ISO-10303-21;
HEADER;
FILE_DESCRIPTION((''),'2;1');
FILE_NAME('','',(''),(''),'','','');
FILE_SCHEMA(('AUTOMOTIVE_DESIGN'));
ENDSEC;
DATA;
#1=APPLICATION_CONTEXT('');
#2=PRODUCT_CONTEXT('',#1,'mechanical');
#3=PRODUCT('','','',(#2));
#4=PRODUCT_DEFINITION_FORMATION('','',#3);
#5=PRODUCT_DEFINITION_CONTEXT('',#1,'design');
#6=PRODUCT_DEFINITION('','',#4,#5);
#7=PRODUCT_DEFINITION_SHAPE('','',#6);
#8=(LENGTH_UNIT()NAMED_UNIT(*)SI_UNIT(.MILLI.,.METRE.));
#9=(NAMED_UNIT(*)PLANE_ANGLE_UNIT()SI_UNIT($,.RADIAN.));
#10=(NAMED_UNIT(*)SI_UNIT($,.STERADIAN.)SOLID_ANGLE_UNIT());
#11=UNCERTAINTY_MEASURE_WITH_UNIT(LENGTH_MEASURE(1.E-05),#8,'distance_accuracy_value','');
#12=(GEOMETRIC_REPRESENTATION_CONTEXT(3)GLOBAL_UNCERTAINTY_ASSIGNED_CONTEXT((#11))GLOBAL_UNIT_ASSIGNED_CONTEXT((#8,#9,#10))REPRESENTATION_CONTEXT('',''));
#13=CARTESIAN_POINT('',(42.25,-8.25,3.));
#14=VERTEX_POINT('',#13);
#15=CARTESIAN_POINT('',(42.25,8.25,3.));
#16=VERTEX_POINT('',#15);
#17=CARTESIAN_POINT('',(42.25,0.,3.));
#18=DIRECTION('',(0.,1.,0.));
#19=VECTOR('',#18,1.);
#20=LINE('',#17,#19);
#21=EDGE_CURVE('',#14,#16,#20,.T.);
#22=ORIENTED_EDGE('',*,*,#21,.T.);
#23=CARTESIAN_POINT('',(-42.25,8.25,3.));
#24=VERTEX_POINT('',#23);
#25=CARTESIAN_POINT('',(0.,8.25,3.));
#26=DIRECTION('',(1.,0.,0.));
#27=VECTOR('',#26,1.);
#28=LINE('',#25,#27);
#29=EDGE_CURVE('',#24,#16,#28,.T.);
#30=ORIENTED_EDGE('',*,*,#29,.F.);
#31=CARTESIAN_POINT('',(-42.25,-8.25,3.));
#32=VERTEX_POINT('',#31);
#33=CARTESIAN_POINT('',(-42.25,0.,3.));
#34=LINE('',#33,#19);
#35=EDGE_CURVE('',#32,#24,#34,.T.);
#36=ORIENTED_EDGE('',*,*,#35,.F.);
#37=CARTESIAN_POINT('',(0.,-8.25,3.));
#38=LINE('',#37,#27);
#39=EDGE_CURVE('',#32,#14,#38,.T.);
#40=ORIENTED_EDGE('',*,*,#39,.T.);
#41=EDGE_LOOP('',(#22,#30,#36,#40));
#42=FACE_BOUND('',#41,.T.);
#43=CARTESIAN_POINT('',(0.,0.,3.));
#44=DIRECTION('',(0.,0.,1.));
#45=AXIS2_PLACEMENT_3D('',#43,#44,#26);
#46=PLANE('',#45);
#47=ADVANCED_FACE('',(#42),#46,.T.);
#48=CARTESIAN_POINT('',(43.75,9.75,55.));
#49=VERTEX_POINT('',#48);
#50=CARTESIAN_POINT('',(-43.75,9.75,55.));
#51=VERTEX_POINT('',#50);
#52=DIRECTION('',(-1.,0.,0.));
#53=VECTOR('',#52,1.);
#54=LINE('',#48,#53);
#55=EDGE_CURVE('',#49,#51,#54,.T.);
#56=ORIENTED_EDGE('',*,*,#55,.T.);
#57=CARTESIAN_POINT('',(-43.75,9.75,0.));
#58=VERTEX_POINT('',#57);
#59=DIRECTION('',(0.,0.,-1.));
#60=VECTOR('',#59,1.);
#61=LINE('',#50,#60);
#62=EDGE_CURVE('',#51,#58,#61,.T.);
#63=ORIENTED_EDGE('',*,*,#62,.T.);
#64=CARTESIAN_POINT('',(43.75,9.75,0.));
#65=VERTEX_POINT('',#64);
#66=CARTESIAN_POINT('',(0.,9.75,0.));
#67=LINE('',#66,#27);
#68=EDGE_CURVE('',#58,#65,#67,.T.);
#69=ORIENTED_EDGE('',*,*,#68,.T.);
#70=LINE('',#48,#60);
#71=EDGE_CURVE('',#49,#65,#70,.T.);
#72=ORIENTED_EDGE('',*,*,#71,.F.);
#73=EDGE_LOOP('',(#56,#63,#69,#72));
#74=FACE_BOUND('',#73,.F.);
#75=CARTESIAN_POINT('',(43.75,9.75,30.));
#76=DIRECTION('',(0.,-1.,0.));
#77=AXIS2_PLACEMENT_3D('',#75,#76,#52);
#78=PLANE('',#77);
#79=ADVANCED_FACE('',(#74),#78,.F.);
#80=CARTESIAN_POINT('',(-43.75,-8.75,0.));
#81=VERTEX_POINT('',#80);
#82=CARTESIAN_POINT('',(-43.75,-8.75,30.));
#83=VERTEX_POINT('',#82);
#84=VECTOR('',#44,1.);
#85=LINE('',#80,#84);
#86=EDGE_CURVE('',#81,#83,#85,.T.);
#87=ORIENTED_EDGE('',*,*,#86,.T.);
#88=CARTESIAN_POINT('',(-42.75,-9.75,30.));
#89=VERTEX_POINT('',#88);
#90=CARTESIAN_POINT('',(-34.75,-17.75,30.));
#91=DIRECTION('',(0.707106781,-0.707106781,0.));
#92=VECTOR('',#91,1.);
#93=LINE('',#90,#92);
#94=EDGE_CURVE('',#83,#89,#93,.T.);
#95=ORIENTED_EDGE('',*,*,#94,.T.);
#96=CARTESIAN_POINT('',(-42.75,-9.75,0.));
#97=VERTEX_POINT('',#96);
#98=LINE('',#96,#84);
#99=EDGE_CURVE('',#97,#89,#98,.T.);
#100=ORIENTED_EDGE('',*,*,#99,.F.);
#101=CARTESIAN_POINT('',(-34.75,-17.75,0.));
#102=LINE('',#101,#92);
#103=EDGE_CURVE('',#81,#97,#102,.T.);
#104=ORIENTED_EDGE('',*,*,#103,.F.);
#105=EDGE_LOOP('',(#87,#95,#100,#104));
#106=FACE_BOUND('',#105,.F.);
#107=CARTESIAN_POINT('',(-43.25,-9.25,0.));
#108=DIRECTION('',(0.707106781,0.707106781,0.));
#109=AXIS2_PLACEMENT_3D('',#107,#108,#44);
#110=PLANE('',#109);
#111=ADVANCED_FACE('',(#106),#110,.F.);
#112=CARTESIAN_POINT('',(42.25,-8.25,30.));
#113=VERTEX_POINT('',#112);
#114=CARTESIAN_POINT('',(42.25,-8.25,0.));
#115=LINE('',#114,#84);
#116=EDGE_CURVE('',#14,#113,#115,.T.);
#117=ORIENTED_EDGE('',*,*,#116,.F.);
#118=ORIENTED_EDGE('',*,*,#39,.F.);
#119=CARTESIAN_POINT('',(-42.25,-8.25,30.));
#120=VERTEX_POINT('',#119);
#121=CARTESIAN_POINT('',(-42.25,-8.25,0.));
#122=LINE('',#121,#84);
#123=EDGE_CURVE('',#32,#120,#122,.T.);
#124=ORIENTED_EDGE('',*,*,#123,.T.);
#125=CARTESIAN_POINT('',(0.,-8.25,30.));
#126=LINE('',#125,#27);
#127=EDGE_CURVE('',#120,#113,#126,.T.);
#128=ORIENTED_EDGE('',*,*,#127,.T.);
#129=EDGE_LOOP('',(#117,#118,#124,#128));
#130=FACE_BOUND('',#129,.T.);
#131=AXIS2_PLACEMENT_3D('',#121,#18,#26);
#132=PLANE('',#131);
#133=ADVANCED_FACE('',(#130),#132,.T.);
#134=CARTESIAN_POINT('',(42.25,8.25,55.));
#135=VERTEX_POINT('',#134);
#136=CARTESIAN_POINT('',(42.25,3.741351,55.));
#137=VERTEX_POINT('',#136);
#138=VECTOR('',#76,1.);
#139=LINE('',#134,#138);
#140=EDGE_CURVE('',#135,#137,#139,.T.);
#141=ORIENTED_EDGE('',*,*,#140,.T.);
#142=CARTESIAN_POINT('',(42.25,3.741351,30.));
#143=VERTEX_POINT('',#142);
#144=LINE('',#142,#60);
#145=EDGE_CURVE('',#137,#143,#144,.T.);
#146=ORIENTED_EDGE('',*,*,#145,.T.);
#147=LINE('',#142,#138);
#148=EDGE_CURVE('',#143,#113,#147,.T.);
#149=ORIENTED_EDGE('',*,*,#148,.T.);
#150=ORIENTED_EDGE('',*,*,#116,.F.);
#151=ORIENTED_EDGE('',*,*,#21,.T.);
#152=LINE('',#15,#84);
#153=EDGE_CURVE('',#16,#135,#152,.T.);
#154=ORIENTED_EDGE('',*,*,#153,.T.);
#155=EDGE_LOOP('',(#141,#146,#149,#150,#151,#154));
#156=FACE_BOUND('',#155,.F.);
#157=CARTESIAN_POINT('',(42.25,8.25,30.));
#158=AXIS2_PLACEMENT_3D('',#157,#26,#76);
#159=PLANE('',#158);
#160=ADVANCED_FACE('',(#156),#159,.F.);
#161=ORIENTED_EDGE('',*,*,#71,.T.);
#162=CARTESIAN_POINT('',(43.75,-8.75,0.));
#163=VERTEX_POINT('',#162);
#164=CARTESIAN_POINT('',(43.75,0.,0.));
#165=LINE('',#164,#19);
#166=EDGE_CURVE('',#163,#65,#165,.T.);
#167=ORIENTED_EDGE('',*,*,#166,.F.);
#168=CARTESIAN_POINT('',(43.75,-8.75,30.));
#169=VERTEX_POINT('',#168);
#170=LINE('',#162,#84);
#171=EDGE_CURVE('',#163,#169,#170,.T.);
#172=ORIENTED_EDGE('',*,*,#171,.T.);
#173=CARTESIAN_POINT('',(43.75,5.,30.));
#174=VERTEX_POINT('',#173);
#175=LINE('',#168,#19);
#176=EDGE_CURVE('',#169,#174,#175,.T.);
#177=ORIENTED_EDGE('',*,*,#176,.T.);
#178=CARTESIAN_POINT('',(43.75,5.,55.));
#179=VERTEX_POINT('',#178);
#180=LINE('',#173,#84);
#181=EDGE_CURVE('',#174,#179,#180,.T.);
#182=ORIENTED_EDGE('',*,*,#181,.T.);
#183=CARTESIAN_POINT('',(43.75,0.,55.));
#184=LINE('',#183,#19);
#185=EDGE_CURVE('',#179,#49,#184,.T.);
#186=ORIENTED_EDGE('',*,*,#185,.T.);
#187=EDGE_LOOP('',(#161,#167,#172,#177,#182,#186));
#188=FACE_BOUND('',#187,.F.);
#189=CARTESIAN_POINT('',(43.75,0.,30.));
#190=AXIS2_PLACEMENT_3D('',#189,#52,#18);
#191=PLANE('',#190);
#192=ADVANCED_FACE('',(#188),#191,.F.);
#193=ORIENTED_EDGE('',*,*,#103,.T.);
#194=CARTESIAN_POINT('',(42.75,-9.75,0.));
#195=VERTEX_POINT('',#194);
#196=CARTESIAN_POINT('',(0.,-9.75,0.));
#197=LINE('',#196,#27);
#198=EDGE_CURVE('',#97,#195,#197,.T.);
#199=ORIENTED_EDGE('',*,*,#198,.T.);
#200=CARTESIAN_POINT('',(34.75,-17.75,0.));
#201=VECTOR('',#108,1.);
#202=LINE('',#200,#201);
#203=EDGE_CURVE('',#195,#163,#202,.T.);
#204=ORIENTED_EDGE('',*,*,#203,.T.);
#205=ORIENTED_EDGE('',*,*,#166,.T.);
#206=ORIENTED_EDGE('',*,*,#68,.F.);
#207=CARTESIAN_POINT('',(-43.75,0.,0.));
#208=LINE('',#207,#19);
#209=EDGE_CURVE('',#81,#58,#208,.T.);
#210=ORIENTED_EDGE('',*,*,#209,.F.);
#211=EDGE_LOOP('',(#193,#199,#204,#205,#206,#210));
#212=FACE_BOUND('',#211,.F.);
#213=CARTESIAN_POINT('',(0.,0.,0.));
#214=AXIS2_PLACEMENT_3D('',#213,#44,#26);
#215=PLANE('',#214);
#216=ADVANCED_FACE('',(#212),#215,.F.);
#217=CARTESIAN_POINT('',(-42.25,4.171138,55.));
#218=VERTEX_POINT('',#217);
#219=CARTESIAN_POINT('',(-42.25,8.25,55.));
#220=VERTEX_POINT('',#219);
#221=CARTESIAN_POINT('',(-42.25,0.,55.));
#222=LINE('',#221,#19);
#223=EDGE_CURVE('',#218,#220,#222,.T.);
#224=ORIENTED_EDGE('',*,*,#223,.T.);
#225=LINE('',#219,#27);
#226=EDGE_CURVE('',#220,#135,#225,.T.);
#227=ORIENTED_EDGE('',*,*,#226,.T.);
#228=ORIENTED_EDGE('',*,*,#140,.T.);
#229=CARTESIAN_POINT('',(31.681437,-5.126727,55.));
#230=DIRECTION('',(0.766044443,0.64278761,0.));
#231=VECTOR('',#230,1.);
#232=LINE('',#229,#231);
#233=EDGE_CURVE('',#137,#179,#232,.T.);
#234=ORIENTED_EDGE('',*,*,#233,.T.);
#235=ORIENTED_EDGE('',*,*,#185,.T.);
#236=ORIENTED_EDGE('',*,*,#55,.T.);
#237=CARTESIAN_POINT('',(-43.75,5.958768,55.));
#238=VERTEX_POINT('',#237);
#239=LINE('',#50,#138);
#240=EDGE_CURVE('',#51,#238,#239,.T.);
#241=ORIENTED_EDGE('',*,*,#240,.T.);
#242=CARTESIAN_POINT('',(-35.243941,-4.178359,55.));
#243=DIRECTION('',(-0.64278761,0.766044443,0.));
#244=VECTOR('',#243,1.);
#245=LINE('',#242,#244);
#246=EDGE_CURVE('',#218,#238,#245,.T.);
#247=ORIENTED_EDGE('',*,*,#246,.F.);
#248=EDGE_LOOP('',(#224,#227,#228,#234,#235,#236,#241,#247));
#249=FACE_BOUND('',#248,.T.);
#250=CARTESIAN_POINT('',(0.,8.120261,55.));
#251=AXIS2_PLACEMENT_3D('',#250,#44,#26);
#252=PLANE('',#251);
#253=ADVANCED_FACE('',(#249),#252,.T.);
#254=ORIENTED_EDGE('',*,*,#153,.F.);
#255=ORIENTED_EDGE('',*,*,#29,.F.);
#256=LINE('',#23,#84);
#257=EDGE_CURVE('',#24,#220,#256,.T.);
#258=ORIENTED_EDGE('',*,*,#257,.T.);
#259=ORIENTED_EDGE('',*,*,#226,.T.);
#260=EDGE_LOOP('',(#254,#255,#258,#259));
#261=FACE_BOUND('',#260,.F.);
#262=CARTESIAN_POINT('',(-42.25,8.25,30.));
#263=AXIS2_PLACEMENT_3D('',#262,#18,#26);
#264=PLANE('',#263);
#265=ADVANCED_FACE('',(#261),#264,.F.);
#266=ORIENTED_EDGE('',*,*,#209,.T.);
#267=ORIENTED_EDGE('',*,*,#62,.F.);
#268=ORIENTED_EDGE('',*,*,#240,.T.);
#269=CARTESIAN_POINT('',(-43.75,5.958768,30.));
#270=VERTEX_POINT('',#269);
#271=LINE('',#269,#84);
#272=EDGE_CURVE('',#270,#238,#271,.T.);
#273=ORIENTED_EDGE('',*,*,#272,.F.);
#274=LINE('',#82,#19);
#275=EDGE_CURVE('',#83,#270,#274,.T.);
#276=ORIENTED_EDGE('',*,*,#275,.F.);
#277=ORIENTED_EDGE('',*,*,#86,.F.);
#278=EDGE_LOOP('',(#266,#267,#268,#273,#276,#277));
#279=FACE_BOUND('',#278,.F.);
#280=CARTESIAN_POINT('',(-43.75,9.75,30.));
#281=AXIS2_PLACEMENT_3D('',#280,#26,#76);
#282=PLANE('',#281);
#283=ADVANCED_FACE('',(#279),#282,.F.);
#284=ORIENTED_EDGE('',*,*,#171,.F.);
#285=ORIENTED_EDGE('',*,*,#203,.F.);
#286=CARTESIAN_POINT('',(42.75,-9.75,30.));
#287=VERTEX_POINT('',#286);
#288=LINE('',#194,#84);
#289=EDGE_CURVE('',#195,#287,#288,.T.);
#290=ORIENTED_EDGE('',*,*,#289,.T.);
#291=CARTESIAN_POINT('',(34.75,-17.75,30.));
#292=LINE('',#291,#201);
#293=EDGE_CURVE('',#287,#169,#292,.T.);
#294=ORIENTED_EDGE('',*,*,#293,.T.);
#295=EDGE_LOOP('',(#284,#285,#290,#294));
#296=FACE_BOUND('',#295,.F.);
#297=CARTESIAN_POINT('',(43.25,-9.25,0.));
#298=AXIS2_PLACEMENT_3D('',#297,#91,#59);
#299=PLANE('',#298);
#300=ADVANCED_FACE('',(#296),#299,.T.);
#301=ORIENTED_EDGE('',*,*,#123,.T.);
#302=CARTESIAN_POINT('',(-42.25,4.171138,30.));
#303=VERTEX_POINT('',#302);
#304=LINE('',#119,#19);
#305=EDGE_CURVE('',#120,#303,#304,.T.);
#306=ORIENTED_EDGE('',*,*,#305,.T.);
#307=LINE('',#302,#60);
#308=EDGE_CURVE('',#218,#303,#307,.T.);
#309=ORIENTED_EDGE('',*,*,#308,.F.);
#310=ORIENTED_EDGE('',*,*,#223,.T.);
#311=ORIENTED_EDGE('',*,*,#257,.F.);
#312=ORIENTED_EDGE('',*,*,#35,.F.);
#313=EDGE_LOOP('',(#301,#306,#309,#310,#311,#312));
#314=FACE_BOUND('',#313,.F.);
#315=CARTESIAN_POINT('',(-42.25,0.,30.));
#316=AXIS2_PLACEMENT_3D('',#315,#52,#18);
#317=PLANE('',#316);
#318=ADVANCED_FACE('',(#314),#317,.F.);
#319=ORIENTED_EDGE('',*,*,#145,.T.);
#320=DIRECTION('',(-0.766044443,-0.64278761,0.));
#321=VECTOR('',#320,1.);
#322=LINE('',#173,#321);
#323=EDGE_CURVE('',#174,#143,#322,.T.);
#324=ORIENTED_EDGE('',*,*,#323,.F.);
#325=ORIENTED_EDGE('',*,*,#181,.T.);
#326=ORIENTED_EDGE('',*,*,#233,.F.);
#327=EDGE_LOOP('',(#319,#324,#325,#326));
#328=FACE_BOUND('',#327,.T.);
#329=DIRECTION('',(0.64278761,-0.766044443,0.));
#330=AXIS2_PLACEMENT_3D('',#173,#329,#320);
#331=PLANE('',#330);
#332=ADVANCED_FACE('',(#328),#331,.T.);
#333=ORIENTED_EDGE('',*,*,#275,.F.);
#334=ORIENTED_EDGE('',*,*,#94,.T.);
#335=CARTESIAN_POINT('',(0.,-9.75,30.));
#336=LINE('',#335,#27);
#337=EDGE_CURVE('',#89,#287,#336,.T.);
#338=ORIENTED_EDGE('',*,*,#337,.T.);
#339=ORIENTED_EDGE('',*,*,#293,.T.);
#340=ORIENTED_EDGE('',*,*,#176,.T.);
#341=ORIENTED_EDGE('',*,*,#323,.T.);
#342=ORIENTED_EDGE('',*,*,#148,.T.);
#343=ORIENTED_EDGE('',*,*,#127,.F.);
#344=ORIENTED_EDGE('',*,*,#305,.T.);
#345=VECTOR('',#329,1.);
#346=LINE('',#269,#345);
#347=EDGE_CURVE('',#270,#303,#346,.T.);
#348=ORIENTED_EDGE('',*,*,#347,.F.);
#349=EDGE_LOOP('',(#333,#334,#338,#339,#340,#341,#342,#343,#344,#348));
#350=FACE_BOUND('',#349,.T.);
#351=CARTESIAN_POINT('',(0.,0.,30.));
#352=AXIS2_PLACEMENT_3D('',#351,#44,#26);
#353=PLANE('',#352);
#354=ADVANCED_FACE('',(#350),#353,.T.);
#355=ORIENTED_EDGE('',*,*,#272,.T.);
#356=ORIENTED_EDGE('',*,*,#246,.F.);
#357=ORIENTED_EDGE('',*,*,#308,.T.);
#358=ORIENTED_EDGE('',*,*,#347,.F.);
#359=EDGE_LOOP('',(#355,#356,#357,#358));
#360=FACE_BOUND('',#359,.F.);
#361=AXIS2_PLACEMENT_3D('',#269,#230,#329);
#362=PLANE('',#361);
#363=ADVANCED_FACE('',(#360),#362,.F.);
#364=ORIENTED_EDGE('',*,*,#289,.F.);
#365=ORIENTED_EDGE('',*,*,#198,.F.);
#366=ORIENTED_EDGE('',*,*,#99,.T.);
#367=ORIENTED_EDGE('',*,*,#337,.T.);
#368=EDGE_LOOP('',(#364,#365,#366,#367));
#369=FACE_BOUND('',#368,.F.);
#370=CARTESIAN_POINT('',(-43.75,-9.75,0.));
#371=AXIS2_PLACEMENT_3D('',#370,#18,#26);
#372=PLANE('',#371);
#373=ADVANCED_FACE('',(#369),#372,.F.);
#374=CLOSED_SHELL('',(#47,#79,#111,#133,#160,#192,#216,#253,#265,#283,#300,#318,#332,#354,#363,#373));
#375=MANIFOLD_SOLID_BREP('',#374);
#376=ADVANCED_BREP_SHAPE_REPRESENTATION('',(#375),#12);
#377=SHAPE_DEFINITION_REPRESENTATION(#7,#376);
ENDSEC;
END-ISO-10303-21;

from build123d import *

# Parameters (mm, degrees)
F0_W        = 87.5
F0_H        = 19.5
F0_W_2      = 84.5
F0_H_2      = 16.5
F1_DEPTH    = 30
F2_DEPTH    = 3
F3_SIZE     = 1
F5_DEPTH    = 25
F6_DEPTH    = 25
F7_T1_DEPTH = 40.3581649162


# Not quite as in the source:
# - a fillet or chamfer that OpenCascade refuses, or shapes differently, is made with other operations: its cross-section is extruded or revolved along the edge and cut away or added


with BuildPart() as f1:
    # F0 (on Top) → F1 (new body)
    with BuildSketch(Plane.XY):
        Rectangle(F0_W, F0_H)
        Rectangle(F0_W_2, F0_H_2, mode=Mode.SUBTRACT)
    extrude(amount=F1_DEPTH)

    # F0 (on Top) → F2 (join)
    with BuildSketch(Plane.XY):
        Rectangle(F0_W_2, F0_H_2)
    extrude(amount=F2_DEPTH)

    # F3
    f3_edges = [f1.edges().sort_by_distance(p)[0] for p in [
        (-43.75, -9.75, 15),
        (43.75, -9.75, 15),
    ]]
    chamfer(f3_edges, length=F3_SIZE)

    # F4 (on face) → F5 (join)
    with BuildSketch(Plane.XY.offset(30)):
        Polygon((-43.75, 9.75), (-43.75, 0), (-42.25, 0), (-42.25, 8.25), (42.25, 8.25), (42.25, 0), (43.75, 0), (43.75, 9.75), align=None)
    extrude(amount=F5_DEPTH)

    # F4 (on face) → F6 (cut)
    with BuildSketch(Plane.XY.offset(30)):
        Polygon((50.0001870096, 0), (-45.6664785743, 0), (-48.1942594051, -2.8349049389), (-42.25, -20.2376823872), (42.25, -19.071014598), align=None)
    extrude(amount=F6_DEPTH, mode=Mode.SUBTRACT)

    # F7: chamfer of 5 x 5.958767963 on 2 edges, made by hand

    # F7_s2 → F7_t1 (cut)
    with BuildSketch(Plane.XY.offset(30)):
        Polygon((-43.75, 5.958767963), (-38.75, 0), (-43.75, 0), align=None)
        Polygon((43.75, 5), (37.791232037, 0), (43.75, 0), align=None)
    extrude(amount=F7_T1_DEPTH, mode=Mode.SUBTRACT)


solid = f1.part
